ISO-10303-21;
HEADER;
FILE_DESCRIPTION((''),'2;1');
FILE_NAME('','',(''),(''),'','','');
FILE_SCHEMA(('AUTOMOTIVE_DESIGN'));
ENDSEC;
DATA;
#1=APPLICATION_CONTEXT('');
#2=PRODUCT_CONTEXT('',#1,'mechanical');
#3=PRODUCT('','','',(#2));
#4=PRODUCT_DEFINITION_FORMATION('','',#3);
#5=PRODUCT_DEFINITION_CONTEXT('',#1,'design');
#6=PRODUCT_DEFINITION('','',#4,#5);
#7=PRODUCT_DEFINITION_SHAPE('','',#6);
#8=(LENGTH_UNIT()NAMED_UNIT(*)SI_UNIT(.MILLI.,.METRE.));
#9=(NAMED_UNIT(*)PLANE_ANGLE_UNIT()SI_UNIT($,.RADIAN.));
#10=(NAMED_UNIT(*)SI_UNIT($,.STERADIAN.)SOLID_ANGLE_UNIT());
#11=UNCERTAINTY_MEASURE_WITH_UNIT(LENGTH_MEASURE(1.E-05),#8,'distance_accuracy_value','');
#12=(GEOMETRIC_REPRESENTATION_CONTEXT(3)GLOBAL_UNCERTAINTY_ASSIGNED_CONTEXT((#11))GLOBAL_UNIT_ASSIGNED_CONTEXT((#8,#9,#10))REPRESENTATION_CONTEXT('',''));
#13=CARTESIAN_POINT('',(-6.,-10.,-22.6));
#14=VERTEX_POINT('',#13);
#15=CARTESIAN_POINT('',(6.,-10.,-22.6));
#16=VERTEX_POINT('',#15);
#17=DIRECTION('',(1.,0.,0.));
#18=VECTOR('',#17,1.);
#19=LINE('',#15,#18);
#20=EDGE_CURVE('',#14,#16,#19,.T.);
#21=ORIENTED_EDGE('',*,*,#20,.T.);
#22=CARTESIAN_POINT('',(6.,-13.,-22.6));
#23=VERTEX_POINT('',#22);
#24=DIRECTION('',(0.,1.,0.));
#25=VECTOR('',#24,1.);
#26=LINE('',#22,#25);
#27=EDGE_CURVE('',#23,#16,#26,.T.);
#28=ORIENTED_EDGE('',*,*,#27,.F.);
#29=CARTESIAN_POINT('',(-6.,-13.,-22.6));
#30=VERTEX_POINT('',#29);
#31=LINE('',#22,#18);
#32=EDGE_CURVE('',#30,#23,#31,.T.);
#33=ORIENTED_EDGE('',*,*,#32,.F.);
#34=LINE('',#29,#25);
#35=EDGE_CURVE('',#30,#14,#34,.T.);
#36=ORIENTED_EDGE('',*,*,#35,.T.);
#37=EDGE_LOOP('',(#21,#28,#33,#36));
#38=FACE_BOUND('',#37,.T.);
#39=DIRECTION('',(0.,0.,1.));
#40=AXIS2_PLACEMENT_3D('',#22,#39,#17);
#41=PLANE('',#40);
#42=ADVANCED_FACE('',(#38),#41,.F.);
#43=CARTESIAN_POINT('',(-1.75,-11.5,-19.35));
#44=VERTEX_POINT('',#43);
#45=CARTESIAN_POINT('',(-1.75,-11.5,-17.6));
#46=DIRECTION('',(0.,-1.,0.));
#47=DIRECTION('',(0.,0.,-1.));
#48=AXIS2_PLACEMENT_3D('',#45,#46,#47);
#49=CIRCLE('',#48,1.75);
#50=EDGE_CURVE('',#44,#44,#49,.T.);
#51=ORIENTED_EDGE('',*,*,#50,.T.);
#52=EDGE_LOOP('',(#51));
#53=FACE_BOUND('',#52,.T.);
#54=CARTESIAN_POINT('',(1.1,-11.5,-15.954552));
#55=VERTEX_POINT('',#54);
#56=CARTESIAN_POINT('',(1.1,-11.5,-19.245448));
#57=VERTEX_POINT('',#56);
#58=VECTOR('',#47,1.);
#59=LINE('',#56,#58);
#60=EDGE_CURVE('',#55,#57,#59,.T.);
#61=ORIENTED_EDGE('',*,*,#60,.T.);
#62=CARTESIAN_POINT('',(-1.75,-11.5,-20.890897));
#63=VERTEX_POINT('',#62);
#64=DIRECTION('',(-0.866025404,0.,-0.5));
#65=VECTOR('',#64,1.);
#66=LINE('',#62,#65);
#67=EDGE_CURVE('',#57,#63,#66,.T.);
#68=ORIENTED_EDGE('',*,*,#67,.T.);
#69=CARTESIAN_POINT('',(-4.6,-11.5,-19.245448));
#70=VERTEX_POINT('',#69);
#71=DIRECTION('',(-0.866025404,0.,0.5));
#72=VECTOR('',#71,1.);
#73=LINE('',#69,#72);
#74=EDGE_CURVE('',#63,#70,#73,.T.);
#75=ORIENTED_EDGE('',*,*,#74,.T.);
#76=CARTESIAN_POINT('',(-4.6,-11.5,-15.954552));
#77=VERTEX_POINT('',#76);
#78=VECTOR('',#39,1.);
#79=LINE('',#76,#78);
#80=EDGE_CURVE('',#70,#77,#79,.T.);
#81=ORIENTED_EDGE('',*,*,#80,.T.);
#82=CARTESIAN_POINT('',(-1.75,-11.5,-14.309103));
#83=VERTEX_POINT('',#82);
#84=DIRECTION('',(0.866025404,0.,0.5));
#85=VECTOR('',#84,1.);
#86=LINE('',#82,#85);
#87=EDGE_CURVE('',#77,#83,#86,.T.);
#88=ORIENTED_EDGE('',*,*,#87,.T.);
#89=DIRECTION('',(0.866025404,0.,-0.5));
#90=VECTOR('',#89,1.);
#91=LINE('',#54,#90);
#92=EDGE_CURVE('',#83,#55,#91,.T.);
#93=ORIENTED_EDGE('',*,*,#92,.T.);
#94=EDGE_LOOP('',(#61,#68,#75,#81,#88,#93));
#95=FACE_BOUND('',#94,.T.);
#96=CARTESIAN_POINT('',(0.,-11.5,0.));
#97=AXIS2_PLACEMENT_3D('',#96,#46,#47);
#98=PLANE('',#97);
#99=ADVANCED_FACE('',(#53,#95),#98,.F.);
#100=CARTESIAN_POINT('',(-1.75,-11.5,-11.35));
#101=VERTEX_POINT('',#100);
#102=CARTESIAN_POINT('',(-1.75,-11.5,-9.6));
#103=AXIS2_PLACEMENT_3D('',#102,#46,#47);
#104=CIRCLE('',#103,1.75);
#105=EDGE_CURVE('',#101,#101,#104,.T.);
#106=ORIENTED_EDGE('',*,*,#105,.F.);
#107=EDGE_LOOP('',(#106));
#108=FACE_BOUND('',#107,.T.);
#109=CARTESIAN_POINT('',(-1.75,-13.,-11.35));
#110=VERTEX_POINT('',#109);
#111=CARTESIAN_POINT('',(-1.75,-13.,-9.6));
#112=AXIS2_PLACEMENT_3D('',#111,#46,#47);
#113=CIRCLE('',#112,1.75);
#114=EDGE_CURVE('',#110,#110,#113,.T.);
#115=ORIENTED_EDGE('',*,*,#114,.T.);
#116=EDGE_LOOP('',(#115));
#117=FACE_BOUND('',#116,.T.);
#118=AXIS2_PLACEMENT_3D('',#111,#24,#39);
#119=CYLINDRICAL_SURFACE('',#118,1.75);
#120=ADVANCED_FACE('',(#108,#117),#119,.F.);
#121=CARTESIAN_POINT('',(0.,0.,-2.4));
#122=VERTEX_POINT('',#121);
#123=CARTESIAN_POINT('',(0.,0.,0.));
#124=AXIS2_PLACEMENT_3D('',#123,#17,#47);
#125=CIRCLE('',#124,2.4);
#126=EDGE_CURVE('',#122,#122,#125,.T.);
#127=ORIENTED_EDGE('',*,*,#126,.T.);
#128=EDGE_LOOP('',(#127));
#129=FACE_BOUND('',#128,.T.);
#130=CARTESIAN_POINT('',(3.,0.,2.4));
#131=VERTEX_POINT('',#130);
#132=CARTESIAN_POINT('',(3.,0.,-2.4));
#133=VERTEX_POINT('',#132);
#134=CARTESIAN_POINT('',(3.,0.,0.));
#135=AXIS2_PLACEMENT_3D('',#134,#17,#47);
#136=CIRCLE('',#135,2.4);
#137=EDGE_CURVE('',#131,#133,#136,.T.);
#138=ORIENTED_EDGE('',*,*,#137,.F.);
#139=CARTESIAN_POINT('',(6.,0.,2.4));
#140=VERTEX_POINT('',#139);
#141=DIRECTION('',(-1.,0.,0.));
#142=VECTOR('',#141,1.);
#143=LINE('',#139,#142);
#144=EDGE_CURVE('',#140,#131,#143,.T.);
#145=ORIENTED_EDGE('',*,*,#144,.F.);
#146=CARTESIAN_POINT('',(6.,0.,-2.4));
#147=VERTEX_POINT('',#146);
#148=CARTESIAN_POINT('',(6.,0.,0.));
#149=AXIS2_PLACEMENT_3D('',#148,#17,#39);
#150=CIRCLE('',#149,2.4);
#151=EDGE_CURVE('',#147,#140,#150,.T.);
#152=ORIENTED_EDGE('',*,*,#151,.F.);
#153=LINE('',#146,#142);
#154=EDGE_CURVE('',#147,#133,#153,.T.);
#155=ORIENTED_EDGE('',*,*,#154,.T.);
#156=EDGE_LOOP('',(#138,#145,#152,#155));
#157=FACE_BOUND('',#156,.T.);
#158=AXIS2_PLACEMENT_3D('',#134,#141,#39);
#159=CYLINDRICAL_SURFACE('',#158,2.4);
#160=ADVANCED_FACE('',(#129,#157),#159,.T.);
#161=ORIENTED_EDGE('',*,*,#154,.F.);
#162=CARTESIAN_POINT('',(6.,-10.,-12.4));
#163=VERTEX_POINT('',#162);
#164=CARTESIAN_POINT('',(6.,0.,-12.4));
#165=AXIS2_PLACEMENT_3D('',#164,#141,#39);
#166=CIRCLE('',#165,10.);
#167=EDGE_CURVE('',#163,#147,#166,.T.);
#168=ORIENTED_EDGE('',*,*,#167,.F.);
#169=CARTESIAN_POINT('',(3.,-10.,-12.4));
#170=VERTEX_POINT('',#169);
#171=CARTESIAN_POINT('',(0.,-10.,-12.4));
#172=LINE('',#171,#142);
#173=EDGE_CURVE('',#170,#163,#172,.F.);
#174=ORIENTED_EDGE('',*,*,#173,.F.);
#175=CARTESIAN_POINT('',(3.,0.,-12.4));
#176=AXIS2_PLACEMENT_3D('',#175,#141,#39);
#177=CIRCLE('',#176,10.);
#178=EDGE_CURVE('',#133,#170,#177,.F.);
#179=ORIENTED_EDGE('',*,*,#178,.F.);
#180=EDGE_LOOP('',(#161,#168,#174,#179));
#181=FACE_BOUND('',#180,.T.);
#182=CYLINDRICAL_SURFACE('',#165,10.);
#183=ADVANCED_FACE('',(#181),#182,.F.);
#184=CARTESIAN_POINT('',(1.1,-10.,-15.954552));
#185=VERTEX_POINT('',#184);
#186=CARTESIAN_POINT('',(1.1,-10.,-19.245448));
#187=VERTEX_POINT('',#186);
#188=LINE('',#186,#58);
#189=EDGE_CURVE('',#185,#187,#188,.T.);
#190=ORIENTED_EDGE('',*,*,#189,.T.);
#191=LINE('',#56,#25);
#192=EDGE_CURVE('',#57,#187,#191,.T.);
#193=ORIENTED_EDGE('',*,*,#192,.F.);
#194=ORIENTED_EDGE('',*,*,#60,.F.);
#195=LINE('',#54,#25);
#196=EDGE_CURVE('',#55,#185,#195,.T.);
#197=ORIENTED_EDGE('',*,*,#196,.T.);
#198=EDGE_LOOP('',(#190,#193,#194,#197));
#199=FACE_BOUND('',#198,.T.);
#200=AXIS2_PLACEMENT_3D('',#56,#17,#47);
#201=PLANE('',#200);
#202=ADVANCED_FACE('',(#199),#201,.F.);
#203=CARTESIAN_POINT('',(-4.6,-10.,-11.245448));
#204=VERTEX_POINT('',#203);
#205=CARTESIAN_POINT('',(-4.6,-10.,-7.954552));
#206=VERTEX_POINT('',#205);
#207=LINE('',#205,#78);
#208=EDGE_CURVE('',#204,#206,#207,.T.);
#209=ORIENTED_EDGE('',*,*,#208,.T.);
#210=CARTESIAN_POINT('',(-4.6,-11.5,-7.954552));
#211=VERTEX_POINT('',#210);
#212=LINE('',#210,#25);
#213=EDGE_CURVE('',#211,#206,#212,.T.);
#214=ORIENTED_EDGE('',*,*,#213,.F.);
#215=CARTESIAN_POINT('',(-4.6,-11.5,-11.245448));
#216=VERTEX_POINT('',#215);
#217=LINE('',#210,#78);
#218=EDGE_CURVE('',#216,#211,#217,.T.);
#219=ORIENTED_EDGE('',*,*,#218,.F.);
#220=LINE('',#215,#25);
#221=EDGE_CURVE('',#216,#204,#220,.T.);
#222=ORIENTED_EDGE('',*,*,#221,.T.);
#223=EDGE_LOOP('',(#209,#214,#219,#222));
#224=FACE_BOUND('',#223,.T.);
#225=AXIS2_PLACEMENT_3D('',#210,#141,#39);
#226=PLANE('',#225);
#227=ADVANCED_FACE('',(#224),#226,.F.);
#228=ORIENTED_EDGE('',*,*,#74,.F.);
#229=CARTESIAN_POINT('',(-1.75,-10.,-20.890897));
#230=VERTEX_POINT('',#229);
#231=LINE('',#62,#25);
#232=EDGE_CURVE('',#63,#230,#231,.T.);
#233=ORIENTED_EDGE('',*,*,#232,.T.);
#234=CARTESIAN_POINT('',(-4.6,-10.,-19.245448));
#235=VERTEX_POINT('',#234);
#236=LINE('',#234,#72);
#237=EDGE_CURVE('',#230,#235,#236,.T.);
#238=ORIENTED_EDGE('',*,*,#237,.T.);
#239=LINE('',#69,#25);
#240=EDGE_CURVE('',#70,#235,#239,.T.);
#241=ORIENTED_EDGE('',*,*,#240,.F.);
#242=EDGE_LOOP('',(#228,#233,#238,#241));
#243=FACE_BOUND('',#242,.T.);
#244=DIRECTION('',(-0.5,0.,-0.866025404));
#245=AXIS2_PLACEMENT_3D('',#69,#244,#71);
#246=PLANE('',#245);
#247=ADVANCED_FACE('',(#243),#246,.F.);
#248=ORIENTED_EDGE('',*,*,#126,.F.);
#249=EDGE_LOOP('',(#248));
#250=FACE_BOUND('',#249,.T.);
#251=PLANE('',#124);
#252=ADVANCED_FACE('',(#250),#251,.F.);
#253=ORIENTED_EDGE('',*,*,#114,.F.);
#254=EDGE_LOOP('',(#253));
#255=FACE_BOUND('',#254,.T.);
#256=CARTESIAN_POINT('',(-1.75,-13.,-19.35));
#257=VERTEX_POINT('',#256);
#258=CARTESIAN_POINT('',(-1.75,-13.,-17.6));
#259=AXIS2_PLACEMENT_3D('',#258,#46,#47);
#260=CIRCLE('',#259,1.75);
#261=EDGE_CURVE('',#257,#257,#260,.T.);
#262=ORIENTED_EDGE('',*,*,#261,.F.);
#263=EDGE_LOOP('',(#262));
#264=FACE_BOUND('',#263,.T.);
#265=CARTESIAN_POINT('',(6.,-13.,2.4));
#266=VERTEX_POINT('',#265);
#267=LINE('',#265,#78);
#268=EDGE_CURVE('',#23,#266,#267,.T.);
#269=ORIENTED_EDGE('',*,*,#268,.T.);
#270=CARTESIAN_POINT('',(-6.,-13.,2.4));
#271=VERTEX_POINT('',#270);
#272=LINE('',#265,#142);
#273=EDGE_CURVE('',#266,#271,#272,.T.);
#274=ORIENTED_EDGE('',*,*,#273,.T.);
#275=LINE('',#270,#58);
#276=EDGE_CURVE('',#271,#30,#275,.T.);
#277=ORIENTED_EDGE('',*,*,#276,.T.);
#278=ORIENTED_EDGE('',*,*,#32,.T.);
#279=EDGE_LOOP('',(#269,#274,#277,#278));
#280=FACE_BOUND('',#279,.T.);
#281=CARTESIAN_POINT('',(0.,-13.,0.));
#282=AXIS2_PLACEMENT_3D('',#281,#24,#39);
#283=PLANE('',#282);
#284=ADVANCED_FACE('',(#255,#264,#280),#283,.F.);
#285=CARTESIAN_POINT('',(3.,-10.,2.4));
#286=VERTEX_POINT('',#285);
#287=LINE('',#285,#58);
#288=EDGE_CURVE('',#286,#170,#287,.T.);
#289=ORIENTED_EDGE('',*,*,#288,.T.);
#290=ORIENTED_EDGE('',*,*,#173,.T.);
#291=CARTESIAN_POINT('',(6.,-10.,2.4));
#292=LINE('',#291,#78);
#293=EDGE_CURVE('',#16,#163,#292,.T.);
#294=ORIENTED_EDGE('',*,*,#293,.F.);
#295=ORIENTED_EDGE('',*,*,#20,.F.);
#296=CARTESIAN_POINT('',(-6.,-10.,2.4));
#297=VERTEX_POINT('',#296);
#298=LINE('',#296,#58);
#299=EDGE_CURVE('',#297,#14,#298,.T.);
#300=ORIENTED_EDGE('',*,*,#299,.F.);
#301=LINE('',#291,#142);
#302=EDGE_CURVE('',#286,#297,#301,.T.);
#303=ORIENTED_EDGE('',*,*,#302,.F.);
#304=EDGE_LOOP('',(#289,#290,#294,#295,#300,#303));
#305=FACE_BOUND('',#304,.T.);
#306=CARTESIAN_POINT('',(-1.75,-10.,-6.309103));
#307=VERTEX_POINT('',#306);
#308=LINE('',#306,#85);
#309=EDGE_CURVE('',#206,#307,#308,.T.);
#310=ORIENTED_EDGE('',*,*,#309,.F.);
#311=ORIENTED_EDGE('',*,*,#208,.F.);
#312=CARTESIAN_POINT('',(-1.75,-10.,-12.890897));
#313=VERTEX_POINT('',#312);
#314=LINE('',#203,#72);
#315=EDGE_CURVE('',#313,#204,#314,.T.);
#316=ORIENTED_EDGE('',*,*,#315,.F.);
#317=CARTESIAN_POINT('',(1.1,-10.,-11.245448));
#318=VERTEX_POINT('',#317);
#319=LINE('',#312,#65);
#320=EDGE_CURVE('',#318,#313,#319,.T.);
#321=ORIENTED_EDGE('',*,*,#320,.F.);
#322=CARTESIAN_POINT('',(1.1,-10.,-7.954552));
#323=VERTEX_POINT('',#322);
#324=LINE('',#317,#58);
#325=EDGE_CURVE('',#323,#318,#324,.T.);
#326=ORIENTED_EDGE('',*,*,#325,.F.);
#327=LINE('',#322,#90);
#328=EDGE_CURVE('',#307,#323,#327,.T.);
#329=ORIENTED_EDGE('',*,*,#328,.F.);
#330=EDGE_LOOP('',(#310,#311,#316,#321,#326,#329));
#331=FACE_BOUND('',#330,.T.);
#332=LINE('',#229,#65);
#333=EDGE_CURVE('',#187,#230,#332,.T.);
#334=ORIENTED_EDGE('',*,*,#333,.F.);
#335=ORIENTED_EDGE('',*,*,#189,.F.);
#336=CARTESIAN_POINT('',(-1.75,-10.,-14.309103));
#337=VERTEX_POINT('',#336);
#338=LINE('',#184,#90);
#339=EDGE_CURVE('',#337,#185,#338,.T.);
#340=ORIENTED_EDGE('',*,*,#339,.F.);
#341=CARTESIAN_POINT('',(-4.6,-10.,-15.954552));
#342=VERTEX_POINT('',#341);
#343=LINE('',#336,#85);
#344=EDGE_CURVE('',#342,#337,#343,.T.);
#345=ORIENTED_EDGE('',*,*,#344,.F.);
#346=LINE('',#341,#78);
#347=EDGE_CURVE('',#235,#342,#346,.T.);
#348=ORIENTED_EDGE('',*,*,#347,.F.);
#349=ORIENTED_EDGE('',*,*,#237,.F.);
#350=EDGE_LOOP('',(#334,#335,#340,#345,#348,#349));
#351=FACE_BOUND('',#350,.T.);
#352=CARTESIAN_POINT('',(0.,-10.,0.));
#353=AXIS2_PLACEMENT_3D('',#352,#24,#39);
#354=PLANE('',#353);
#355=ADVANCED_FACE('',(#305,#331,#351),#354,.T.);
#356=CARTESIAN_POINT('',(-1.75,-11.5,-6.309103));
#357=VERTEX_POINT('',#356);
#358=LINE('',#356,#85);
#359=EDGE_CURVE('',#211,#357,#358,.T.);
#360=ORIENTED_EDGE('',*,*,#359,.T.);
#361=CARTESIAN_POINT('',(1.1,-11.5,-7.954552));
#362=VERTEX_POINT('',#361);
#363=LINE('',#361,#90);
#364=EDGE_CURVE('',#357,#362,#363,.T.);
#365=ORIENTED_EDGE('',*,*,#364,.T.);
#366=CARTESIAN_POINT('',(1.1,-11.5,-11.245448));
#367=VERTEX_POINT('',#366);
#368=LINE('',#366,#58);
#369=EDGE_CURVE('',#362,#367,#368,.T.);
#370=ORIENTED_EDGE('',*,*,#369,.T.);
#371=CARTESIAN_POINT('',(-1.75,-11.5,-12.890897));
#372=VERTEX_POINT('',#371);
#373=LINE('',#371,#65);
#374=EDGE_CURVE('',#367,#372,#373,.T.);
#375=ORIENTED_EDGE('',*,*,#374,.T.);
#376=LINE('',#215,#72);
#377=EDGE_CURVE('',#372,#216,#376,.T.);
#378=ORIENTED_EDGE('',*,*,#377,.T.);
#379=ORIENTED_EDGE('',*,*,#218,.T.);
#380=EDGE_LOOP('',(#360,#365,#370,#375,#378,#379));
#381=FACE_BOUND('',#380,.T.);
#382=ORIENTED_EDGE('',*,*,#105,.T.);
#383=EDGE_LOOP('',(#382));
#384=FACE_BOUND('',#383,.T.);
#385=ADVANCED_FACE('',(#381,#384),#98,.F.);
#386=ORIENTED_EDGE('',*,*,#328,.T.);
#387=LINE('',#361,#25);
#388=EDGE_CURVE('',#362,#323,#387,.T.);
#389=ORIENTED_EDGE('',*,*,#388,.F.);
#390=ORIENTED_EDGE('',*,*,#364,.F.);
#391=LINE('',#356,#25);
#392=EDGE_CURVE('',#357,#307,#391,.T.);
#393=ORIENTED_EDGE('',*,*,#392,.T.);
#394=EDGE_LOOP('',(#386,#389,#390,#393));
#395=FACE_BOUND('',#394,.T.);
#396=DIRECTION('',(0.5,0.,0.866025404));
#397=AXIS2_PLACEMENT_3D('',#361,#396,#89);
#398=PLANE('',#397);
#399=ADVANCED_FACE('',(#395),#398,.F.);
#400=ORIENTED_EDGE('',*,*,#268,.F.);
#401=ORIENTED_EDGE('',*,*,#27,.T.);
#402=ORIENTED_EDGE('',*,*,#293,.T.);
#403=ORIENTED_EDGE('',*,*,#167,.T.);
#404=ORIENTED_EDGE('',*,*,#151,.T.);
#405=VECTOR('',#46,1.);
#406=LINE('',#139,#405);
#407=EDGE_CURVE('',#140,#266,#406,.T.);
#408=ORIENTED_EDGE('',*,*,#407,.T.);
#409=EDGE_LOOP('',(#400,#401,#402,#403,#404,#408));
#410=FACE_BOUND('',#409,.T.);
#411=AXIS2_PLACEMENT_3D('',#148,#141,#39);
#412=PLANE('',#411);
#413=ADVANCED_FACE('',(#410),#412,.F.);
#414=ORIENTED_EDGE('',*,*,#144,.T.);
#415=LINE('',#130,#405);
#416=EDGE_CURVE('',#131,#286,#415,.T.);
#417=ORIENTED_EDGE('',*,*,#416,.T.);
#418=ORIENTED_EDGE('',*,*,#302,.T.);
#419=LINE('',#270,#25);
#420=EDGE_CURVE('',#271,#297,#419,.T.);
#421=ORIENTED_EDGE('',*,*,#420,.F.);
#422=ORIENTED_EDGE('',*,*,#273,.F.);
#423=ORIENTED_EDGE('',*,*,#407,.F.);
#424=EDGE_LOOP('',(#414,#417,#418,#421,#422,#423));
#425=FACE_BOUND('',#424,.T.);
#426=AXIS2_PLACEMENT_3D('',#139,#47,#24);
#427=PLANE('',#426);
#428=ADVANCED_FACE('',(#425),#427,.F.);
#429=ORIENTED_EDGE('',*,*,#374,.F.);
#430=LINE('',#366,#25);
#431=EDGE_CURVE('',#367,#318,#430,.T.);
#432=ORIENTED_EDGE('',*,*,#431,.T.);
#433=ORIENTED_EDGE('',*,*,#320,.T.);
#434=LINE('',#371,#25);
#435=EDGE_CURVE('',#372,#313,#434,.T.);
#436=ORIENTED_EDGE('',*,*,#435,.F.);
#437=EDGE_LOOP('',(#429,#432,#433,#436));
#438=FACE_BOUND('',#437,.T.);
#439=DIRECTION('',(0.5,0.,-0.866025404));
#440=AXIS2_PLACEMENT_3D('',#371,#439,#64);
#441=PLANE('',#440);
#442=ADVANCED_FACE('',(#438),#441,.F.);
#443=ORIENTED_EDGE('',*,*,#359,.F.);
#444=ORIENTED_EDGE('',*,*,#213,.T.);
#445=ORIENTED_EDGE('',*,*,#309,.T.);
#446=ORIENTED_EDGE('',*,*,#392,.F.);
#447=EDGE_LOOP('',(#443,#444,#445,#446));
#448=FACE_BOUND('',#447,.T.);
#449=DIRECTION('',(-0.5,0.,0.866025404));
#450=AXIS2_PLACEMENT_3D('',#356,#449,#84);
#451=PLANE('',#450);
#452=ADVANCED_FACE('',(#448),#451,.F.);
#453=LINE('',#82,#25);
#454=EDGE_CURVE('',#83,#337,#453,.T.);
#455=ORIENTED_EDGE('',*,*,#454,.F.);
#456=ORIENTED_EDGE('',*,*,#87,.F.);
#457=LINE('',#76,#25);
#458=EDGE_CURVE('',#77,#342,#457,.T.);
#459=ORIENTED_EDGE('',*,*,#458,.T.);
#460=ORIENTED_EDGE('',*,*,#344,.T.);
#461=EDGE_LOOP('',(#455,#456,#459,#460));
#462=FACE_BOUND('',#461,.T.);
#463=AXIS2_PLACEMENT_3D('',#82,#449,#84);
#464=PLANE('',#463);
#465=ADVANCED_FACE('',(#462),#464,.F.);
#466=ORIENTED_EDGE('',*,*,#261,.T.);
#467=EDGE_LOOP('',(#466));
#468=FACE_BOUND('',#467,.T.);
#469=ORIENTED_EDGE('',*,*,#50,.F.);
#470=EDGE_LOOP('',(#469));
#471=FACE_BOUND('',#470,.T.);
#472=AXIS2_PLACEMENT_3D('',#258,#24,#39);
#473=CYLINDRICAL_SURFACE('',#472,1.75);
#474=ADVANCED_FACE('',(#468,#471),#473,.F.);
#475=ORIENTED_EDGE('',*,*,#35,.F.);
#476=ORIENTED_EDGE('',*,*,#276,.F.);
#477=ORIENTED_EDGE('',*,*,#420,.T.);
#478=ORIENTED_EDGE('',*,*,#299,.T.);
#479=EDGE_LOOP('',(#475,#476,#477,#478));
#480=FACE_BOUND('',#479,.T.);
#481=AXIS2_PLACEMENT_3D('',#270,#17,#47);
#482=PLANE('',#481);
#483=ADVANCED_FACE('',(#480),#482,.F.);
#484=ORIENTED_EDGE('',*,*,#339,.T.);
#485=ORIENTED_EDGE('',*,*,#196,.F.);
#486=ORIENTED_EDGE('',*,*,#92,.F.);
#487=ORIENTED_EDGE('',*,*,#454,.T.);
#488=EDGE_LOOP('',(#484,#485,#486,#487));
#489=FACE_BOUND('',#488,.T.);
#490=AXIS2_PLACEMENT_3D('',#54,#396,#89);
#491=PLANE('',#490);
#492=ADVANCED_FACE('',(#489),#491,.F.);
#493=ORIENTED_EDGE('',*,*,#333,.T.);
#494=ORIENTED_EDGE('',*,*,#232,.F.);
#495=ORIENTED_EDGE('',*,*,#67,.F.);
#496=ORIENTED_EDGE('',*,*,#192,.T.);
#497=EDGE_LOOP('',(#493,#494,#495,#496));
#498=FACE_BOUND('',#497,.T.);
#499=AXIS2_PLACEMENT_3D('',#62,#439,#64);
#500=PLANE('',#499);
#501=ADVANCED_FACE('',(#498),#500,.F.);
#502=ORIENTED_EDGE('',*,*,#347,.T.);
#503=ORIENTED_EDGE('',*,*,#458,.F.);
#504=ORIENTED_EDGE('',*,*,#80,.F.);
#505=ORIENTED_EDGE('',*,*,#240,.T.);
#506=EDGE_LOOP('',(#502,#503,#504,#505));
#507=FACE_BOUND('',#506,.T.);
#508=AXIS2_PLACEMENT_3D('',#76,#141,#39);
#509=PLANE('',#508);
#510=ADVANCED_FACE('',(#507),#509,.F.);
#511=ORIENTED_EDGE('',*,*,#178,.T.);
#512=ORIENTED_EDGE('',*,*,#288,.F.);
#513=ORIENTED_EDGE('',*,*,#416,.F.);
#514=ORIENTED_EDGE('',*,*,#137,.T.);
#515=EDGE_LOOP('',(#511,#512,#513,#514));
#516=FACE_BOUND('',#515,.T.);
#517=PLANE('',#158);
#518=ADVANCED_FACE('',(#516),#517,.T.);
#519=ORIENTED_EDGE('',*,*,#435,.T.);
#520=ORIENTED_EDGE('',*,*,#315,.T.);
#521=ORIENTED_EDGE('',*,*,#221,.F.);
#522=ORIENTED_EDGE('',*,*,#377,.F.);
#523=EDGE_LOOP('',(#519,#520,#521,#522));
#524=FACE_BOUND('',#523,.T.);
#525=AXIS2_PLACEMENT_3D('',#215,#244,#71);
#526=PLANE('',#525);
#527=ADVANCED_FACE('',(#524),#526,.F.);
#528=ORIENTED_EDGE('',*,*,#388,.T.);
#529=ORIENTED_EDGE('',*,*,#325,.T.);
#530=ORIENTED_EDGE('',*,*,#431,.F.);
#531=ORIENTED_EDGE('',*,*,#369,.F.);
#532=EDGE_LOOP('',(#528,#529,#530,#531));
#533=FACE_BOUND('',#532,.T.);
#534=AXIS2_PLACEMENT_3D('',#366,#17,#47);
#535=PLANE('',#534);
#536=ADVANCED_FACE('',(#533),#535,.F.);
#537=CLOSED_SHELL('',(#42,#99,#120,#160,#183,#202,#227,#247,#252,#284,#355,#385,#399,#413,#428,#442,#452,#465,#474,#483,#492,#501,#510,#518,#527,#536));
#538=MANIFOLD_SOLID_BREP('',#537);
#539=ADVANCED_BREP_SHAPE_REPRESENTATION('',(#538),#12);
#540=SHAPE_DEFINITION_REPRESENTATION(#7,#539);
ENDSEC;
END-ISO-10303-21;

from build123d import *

# Parameters (mm, degrees)
ESQUISSE1_R             = 2.4
BOSS_EXTRU_1_DEPTH      = 3
BOSS_EXTRU_2_DEPTH      = 3
ESQUISSE3_W             = 12
ESQUISSE3_H             = 25
ESQUISSE3_R             = 1.75
BOSS_EXTRU_3_DEPTH      = 3
ENL_V_MAT_EXTRU_1_DEPTH = 1.5
CONG_1_R                = 10


with BuildPart() as part:
    # Esquisse1 → Boss.-Extru.1 (new body)
    with BuildSketch(Plane(origin=(0, 0, 0), x_dir=(0, 0, -1), z_dir=(1, 0, 0))):
        Circle(ESQUISSE1_R)
    extrude(amount=BOSS_EXTRU_1_DEPTH)

    # Esquisse2 → Boss.-Extru.2 (add)
    with BuildSketch(Plane(origin=(3, 0, 0), x_dir=(0, 0, -1), z_dir=(1, 0, 0))):
        with BuildLine():
            Line((-2.4, 0), (-2.4, -10))
            Line((-2.4, -10), (2.4, -10))
            Line((2.4, -10), (2.4, 0))
            ThreePointArc((2.4, 0), (0, 2.4), (-2.4, 0))
        make_face()
    extrude(amount=BOSS_EXTRU_2_DEPTH)

    # Esquisse3 → Boss.-Extru.3 (add)
    with BuildSketch(Plane.XZ.offset(10)):
        with Locations((0, -10.1)):
            Rectangle(ESQUISSE3_W, ESQUISSE3_H)
        with Locations(Location((-1.75, -9.6, 0), (0, 0, 270))):
            Circle(ESQUISSE3_R, mode=Mode.SUBTRACT)
        with Locations(Location((-1.75, -17.6, 0), (0, 0, 270))):
            Circle(ESQUISSE3_R, mode=Mode.SUBTRACT)
    extrude(amount=BOSS_EXTRU_3_DEPTH)

    # Esquisse4 → Enlèv. mat.-Extru.1 (cut)
    with BuildSketch(Plane(origin=(0, -10, 0), x_dir=(1, 0, 0), z_dir=(0, 1, 0))):
        Polygon((-4.6, 7.954551733), (-4.6, 11.245448267), (-1.75, 12.890896534), (1.1, 11.245448267), (1.1, 7.954551733), (-1.75, 6.309103466), align=None)
        Polygon((-4.6, 15.954551733), (-4.6, 19.245448267), (-1.75, 20.890896534), (1.1, 19.245448267), (1.1, 15.954551733), (-1.75, 14.309103466), align=None)
    extrude(amount=-ENL_V_MAT_EXTRU_1_DEPTH, mode=Mode.SUBTRACT)

    # Congé1
    cong_1_edges = [part.edges().sort_by_distance(p)[0] for p in [
        (4.5, -10, -2.4),
    ]]
    fillet(cong_1_edges, radius=CONG_1_R - 0.0001)  # a hair under: the kernel refuses the full size


solid = part.part
